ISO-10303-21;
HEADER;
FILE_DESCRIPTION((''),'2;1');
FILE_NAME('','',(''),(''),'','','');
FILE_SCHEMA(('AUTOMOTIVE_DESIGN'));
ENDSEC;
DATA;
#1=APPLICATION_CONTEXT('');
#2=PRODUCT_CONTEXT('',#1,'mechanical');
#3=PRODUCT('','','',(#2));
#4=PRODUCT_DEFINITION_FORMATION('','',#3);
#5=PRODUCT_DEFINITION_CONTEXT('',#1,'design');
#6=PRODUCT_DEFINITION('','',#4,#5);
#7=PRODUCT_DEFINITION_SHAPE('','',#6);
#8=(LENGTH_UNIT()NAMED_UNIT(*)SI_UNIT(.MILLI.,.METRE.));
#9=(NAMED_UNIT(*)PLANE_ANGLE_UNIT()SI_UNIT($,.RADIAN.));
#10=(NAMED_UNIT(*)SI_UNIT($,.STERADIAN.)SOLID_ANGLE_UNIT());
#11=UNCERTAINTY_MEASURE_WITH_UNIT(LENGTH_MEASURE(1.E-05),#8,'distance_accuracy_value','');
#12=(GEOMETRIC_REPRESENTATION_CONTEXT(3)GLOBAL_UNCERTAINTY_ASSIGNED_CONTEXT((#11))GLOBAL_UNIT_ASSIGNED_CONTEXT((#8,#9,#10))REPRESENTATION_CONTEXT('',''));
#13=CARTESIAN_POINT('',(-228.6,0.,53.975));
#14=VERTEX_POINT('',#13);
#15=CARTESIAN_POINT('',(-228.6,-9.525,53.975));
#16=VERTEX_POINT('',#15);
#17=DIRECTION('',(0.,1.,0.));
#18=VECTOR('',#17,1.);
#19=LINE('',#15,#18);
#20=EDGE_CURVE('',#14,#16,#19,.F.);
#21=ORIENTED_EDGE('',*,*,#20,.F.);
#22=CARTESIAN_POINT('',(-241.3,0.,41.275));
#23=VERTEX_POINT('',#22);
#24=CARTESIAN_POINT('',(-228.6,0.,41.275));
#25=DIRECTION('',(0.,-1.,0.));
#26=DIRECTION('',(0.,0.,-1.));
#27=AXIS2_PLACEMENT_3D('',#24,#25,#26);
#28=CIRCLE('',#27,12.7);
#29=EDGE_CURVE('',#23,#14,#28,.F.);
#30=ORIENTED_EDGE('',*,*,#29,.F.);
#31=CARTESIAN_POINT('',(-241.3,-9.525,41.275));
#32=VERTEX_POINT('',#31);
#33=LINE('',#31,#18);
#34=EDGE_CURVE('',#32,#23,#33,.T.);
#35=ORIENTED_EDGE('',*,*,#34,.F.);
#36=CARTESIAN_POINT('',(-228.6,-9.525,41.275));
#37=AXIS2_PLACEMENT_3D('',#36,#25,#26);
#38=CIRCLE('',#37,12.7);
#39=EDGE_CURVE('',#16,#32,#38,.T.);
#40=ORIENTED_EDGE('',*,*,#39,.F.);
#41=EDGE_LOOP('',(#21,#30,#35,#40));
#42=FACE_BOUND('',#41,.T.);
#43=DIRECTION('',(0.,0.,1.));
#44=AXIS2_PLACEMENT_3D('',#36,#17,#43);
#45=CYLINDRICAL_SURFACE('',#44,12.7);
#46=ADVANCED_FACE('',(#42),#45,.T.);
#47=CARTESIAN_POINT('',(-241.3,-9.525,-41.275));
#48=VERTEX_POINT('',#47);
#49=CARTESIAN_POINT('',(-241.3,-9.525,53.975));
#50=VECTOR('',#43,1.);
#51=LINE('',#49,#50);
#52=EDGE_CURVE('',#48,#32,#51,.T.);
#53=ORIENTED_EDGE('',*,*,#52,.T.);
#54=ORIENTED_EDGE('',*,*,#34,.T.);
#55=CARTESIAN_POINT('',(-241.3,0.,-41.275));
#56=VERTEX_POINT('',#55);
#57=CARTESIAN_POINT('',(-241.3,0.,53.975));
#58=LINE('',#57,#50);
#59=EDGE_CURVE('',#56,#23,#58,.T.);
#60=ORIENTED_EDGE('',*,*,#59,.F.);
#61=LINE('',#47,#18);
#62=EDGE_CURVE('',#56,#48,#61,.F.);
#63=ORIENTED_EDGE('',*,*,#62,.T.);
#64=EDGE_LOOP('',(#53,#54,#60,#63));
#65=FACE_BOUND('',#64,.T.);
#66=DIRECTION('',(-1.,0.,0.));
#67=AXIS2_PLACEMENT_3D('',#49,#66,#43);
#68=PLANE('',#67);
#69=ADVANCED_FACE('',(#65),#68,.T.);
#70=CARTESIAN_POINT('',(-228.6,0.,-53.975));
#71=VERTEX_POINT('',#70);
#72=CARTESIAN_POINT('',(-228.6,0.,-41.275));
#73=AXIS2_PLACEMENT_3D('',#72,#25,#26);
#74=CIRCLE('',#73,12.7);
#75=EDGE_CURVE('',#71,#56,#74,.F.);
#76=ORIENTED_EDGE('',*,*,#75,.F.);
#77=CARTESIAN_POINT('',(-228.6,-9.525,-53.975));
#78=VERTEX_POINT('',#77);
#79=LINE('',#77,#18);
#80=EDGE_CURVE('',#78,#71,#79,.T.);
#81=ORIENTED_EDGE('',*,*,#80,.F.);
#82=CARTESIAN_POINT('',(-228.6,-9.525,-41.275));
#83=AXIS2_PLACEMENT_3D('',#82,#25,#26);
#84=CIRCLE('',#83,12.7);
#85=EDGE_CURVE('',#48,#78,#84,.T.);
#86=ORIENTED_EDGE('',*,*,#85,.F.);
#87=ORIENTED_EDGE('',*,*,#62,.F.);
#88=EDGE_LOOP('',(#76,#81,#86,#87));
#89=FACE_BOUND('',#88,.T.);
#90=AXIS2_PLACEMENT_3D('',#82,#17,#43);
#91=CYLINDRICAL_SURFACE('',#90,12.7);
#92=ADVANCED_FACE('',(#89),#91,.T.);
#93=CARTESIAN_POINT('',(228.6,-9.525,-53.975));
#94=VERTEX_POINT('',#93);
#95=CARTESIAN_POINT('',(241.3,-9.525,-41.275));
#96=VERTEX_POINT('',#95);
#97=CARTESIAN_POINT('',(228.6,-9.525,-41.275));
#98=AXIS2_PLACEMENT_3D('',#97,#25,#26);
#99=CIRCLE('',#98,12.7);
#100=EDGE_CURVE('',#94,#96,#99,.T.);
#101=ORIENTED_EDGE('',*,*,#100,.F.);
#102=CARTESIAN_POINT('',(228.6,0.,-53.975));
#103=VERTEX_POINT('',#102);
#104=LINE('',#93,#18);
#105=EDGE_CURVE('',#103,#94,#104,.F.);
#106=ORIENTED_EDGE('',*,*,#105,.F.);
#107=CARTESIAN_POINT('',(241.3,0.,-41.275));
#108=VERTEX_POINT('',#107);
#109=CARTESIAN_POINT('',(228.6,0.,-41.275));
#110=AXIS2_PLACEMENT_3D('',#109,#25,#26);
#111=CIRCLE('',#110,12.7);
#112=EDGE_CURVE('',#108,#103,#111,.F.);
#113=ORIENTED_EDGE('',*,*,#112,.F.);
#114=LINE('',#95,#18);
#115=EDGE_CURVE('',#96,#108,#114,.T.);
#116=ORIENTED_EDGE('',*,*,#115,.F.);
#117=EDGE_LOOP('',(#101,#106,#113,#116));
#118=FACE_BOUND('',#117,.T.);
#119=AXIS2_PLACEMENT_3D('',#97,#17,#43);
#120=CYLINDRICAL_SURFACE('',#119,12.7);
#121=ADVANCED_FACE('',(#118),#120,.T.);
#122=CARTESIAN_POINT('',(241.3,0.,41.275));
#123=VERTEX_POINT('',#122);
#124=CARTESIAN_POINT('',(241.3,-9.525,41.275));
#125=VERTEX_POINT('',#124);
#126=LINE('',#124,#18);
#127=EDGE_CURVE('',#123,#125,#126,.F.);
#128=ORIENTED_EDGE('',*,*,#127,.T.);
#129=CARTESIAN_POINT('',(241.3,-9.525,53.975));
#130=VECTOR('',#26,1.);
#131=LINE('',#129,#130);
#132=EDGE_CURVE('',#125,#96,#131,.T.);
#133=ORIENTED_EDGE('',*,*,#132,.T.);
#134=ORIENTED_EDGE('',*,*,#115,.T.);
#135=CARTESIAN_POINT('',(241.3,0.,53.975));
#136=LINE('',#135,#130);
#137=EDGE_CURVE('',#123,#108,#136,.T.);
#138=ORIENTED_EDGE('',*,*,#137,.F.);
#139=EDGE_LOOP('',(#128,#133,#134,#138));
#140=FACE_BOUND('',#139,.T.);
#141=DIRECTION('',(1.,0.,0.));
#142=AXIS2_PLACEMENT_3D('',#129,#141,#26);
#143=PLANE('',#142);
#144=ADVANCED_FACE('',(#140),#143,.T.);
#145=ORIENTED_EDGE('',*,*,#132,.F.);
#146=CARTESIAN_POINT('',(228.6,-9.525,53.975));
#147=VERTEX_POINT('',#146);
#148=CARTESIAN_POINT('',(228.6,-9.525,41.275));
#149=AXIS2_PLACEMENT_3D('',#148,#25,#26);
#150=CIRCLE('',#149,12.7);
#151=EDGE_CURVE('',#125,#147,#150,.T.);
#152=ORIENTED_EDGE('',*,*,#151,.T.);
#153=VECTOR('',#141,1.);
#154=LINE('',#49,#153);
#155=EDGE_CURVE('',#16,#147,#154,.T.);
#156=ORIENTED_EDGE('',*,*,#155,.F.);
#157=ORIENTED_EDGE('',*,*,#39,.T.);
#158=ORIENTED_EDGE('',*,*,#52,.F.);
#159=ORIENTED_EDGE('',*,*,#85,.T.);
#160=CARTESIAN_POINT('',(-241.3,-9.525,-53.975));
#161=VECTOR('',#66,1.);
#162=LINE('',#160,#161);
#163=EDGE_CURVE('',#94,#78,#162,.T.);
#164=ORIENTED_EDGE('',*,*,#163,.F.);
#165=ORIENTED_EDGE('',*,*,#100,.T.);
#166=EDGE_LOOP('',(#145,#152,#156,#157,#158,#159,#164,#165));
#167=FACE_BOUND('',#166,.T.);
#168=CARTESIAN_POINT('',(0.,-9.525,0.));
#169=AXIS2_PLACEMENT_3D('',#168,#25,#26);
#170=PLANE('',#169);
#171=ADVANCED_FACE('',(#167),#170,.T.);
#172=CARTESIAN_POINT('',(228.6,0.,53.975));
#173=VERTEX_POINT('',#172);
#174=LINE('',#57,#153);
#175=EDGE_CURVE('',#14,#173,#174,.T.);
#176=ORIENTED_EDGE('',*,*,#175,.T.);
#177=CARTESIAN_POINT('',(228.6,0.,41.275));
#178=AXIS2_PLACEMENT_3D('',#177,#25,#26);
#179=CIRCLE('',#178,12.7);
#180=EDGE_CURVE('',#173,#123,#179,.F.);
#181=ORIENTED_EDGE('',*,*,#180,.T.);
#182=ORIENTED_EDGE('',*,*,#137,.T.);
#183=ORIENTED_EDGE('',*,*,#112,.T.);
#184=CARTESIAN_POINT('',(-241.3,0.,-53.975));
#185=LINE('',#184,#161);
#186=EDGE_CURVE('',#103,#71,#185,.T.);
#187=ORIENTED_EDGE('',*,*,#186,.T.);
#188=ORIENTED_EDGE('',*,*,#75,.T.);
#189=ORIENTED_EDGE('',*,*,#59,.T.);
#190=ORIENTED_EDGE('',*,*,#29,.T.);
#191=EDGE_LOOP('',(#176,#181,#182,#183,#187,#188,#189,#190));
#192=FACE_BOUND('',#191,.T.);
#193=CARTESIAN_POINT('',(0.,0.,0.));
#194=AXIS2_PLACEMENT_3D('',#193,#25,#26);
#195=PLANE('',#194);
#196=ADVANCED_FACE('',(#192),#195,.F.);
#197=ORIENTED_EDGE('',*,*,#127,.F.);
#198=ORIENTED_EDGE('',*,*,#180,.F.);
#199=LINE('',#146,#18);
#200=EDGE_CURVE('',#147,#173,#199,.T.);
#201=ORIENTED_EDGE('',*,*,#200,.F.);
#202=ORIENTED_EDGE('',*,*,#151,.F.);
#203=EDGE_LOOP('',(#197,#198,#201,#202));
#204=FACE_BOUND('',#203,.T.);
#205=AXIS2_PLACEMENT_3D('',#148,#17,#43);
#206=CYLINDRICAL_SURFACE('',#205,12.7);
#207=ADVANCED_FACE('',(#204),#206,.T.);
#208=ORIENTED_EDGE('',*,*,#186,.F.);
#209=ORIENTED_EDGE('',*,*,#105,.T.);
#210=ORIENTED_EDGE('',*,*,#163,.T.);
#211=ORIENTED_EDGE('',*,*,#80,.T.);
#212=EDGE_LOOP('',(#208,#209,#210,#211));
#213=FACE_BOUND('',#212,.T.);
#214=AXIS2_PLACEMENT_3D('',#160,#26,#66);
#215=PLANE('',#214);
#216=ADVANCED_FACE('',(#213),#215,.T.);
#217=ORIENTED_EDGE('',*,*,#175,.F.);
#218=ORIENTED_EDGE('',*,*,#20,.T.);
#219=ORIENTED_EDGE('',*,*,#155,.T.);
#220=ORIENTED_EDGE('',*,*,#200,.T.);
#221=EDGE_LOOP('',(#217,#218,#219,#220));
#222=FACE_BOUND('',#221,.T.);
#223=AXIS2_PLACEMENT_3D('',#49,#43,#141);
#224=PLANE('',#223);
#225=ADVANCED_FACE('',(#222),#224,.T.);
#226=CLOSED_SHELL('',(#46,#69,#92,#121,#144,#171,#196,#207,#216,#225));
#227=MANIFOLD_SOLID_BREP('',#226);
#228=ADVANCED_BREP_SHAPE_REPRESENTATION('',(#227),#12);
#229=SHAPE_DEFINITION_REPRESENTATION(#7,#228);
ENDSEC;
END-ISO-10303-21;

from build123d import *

# Parameters (mm, degrees)
SKETCH1_W          = 482.6
SKETCH1_H          = 107.95
BASE_FLANGE1_DEPTH = 9.525
FILLET1_R          = 12.7


# Sheet-metal steps are written as plain solids
with BuildPart() as part:
    # Sketch1 → Base-Flange1 (new body)
    with BuildSketch(Plane(origin=(0, 0, 0), x_dir=(1, 0, 0), z_dir=(0, 1, 0))):
        Rectangle(SKETCH1_W, SKETCH1_H)
    extrude(amount=-BASE_FLANGE1_DEPTH)

    # Fillet1
    fillet1_edges = [part.edges().sort_by_distance(p)[0] for p in [
        (241.3, -4.7625, 53.975),
        (-241.3, -4.7625, 53.975),
        (-241.3, -4.7625, -53.975),
        (241.3, -4.7625, -53.975),
    ]]
    fillet(fillet1_edges, radius=FILLET1_R)


solid = part.part
